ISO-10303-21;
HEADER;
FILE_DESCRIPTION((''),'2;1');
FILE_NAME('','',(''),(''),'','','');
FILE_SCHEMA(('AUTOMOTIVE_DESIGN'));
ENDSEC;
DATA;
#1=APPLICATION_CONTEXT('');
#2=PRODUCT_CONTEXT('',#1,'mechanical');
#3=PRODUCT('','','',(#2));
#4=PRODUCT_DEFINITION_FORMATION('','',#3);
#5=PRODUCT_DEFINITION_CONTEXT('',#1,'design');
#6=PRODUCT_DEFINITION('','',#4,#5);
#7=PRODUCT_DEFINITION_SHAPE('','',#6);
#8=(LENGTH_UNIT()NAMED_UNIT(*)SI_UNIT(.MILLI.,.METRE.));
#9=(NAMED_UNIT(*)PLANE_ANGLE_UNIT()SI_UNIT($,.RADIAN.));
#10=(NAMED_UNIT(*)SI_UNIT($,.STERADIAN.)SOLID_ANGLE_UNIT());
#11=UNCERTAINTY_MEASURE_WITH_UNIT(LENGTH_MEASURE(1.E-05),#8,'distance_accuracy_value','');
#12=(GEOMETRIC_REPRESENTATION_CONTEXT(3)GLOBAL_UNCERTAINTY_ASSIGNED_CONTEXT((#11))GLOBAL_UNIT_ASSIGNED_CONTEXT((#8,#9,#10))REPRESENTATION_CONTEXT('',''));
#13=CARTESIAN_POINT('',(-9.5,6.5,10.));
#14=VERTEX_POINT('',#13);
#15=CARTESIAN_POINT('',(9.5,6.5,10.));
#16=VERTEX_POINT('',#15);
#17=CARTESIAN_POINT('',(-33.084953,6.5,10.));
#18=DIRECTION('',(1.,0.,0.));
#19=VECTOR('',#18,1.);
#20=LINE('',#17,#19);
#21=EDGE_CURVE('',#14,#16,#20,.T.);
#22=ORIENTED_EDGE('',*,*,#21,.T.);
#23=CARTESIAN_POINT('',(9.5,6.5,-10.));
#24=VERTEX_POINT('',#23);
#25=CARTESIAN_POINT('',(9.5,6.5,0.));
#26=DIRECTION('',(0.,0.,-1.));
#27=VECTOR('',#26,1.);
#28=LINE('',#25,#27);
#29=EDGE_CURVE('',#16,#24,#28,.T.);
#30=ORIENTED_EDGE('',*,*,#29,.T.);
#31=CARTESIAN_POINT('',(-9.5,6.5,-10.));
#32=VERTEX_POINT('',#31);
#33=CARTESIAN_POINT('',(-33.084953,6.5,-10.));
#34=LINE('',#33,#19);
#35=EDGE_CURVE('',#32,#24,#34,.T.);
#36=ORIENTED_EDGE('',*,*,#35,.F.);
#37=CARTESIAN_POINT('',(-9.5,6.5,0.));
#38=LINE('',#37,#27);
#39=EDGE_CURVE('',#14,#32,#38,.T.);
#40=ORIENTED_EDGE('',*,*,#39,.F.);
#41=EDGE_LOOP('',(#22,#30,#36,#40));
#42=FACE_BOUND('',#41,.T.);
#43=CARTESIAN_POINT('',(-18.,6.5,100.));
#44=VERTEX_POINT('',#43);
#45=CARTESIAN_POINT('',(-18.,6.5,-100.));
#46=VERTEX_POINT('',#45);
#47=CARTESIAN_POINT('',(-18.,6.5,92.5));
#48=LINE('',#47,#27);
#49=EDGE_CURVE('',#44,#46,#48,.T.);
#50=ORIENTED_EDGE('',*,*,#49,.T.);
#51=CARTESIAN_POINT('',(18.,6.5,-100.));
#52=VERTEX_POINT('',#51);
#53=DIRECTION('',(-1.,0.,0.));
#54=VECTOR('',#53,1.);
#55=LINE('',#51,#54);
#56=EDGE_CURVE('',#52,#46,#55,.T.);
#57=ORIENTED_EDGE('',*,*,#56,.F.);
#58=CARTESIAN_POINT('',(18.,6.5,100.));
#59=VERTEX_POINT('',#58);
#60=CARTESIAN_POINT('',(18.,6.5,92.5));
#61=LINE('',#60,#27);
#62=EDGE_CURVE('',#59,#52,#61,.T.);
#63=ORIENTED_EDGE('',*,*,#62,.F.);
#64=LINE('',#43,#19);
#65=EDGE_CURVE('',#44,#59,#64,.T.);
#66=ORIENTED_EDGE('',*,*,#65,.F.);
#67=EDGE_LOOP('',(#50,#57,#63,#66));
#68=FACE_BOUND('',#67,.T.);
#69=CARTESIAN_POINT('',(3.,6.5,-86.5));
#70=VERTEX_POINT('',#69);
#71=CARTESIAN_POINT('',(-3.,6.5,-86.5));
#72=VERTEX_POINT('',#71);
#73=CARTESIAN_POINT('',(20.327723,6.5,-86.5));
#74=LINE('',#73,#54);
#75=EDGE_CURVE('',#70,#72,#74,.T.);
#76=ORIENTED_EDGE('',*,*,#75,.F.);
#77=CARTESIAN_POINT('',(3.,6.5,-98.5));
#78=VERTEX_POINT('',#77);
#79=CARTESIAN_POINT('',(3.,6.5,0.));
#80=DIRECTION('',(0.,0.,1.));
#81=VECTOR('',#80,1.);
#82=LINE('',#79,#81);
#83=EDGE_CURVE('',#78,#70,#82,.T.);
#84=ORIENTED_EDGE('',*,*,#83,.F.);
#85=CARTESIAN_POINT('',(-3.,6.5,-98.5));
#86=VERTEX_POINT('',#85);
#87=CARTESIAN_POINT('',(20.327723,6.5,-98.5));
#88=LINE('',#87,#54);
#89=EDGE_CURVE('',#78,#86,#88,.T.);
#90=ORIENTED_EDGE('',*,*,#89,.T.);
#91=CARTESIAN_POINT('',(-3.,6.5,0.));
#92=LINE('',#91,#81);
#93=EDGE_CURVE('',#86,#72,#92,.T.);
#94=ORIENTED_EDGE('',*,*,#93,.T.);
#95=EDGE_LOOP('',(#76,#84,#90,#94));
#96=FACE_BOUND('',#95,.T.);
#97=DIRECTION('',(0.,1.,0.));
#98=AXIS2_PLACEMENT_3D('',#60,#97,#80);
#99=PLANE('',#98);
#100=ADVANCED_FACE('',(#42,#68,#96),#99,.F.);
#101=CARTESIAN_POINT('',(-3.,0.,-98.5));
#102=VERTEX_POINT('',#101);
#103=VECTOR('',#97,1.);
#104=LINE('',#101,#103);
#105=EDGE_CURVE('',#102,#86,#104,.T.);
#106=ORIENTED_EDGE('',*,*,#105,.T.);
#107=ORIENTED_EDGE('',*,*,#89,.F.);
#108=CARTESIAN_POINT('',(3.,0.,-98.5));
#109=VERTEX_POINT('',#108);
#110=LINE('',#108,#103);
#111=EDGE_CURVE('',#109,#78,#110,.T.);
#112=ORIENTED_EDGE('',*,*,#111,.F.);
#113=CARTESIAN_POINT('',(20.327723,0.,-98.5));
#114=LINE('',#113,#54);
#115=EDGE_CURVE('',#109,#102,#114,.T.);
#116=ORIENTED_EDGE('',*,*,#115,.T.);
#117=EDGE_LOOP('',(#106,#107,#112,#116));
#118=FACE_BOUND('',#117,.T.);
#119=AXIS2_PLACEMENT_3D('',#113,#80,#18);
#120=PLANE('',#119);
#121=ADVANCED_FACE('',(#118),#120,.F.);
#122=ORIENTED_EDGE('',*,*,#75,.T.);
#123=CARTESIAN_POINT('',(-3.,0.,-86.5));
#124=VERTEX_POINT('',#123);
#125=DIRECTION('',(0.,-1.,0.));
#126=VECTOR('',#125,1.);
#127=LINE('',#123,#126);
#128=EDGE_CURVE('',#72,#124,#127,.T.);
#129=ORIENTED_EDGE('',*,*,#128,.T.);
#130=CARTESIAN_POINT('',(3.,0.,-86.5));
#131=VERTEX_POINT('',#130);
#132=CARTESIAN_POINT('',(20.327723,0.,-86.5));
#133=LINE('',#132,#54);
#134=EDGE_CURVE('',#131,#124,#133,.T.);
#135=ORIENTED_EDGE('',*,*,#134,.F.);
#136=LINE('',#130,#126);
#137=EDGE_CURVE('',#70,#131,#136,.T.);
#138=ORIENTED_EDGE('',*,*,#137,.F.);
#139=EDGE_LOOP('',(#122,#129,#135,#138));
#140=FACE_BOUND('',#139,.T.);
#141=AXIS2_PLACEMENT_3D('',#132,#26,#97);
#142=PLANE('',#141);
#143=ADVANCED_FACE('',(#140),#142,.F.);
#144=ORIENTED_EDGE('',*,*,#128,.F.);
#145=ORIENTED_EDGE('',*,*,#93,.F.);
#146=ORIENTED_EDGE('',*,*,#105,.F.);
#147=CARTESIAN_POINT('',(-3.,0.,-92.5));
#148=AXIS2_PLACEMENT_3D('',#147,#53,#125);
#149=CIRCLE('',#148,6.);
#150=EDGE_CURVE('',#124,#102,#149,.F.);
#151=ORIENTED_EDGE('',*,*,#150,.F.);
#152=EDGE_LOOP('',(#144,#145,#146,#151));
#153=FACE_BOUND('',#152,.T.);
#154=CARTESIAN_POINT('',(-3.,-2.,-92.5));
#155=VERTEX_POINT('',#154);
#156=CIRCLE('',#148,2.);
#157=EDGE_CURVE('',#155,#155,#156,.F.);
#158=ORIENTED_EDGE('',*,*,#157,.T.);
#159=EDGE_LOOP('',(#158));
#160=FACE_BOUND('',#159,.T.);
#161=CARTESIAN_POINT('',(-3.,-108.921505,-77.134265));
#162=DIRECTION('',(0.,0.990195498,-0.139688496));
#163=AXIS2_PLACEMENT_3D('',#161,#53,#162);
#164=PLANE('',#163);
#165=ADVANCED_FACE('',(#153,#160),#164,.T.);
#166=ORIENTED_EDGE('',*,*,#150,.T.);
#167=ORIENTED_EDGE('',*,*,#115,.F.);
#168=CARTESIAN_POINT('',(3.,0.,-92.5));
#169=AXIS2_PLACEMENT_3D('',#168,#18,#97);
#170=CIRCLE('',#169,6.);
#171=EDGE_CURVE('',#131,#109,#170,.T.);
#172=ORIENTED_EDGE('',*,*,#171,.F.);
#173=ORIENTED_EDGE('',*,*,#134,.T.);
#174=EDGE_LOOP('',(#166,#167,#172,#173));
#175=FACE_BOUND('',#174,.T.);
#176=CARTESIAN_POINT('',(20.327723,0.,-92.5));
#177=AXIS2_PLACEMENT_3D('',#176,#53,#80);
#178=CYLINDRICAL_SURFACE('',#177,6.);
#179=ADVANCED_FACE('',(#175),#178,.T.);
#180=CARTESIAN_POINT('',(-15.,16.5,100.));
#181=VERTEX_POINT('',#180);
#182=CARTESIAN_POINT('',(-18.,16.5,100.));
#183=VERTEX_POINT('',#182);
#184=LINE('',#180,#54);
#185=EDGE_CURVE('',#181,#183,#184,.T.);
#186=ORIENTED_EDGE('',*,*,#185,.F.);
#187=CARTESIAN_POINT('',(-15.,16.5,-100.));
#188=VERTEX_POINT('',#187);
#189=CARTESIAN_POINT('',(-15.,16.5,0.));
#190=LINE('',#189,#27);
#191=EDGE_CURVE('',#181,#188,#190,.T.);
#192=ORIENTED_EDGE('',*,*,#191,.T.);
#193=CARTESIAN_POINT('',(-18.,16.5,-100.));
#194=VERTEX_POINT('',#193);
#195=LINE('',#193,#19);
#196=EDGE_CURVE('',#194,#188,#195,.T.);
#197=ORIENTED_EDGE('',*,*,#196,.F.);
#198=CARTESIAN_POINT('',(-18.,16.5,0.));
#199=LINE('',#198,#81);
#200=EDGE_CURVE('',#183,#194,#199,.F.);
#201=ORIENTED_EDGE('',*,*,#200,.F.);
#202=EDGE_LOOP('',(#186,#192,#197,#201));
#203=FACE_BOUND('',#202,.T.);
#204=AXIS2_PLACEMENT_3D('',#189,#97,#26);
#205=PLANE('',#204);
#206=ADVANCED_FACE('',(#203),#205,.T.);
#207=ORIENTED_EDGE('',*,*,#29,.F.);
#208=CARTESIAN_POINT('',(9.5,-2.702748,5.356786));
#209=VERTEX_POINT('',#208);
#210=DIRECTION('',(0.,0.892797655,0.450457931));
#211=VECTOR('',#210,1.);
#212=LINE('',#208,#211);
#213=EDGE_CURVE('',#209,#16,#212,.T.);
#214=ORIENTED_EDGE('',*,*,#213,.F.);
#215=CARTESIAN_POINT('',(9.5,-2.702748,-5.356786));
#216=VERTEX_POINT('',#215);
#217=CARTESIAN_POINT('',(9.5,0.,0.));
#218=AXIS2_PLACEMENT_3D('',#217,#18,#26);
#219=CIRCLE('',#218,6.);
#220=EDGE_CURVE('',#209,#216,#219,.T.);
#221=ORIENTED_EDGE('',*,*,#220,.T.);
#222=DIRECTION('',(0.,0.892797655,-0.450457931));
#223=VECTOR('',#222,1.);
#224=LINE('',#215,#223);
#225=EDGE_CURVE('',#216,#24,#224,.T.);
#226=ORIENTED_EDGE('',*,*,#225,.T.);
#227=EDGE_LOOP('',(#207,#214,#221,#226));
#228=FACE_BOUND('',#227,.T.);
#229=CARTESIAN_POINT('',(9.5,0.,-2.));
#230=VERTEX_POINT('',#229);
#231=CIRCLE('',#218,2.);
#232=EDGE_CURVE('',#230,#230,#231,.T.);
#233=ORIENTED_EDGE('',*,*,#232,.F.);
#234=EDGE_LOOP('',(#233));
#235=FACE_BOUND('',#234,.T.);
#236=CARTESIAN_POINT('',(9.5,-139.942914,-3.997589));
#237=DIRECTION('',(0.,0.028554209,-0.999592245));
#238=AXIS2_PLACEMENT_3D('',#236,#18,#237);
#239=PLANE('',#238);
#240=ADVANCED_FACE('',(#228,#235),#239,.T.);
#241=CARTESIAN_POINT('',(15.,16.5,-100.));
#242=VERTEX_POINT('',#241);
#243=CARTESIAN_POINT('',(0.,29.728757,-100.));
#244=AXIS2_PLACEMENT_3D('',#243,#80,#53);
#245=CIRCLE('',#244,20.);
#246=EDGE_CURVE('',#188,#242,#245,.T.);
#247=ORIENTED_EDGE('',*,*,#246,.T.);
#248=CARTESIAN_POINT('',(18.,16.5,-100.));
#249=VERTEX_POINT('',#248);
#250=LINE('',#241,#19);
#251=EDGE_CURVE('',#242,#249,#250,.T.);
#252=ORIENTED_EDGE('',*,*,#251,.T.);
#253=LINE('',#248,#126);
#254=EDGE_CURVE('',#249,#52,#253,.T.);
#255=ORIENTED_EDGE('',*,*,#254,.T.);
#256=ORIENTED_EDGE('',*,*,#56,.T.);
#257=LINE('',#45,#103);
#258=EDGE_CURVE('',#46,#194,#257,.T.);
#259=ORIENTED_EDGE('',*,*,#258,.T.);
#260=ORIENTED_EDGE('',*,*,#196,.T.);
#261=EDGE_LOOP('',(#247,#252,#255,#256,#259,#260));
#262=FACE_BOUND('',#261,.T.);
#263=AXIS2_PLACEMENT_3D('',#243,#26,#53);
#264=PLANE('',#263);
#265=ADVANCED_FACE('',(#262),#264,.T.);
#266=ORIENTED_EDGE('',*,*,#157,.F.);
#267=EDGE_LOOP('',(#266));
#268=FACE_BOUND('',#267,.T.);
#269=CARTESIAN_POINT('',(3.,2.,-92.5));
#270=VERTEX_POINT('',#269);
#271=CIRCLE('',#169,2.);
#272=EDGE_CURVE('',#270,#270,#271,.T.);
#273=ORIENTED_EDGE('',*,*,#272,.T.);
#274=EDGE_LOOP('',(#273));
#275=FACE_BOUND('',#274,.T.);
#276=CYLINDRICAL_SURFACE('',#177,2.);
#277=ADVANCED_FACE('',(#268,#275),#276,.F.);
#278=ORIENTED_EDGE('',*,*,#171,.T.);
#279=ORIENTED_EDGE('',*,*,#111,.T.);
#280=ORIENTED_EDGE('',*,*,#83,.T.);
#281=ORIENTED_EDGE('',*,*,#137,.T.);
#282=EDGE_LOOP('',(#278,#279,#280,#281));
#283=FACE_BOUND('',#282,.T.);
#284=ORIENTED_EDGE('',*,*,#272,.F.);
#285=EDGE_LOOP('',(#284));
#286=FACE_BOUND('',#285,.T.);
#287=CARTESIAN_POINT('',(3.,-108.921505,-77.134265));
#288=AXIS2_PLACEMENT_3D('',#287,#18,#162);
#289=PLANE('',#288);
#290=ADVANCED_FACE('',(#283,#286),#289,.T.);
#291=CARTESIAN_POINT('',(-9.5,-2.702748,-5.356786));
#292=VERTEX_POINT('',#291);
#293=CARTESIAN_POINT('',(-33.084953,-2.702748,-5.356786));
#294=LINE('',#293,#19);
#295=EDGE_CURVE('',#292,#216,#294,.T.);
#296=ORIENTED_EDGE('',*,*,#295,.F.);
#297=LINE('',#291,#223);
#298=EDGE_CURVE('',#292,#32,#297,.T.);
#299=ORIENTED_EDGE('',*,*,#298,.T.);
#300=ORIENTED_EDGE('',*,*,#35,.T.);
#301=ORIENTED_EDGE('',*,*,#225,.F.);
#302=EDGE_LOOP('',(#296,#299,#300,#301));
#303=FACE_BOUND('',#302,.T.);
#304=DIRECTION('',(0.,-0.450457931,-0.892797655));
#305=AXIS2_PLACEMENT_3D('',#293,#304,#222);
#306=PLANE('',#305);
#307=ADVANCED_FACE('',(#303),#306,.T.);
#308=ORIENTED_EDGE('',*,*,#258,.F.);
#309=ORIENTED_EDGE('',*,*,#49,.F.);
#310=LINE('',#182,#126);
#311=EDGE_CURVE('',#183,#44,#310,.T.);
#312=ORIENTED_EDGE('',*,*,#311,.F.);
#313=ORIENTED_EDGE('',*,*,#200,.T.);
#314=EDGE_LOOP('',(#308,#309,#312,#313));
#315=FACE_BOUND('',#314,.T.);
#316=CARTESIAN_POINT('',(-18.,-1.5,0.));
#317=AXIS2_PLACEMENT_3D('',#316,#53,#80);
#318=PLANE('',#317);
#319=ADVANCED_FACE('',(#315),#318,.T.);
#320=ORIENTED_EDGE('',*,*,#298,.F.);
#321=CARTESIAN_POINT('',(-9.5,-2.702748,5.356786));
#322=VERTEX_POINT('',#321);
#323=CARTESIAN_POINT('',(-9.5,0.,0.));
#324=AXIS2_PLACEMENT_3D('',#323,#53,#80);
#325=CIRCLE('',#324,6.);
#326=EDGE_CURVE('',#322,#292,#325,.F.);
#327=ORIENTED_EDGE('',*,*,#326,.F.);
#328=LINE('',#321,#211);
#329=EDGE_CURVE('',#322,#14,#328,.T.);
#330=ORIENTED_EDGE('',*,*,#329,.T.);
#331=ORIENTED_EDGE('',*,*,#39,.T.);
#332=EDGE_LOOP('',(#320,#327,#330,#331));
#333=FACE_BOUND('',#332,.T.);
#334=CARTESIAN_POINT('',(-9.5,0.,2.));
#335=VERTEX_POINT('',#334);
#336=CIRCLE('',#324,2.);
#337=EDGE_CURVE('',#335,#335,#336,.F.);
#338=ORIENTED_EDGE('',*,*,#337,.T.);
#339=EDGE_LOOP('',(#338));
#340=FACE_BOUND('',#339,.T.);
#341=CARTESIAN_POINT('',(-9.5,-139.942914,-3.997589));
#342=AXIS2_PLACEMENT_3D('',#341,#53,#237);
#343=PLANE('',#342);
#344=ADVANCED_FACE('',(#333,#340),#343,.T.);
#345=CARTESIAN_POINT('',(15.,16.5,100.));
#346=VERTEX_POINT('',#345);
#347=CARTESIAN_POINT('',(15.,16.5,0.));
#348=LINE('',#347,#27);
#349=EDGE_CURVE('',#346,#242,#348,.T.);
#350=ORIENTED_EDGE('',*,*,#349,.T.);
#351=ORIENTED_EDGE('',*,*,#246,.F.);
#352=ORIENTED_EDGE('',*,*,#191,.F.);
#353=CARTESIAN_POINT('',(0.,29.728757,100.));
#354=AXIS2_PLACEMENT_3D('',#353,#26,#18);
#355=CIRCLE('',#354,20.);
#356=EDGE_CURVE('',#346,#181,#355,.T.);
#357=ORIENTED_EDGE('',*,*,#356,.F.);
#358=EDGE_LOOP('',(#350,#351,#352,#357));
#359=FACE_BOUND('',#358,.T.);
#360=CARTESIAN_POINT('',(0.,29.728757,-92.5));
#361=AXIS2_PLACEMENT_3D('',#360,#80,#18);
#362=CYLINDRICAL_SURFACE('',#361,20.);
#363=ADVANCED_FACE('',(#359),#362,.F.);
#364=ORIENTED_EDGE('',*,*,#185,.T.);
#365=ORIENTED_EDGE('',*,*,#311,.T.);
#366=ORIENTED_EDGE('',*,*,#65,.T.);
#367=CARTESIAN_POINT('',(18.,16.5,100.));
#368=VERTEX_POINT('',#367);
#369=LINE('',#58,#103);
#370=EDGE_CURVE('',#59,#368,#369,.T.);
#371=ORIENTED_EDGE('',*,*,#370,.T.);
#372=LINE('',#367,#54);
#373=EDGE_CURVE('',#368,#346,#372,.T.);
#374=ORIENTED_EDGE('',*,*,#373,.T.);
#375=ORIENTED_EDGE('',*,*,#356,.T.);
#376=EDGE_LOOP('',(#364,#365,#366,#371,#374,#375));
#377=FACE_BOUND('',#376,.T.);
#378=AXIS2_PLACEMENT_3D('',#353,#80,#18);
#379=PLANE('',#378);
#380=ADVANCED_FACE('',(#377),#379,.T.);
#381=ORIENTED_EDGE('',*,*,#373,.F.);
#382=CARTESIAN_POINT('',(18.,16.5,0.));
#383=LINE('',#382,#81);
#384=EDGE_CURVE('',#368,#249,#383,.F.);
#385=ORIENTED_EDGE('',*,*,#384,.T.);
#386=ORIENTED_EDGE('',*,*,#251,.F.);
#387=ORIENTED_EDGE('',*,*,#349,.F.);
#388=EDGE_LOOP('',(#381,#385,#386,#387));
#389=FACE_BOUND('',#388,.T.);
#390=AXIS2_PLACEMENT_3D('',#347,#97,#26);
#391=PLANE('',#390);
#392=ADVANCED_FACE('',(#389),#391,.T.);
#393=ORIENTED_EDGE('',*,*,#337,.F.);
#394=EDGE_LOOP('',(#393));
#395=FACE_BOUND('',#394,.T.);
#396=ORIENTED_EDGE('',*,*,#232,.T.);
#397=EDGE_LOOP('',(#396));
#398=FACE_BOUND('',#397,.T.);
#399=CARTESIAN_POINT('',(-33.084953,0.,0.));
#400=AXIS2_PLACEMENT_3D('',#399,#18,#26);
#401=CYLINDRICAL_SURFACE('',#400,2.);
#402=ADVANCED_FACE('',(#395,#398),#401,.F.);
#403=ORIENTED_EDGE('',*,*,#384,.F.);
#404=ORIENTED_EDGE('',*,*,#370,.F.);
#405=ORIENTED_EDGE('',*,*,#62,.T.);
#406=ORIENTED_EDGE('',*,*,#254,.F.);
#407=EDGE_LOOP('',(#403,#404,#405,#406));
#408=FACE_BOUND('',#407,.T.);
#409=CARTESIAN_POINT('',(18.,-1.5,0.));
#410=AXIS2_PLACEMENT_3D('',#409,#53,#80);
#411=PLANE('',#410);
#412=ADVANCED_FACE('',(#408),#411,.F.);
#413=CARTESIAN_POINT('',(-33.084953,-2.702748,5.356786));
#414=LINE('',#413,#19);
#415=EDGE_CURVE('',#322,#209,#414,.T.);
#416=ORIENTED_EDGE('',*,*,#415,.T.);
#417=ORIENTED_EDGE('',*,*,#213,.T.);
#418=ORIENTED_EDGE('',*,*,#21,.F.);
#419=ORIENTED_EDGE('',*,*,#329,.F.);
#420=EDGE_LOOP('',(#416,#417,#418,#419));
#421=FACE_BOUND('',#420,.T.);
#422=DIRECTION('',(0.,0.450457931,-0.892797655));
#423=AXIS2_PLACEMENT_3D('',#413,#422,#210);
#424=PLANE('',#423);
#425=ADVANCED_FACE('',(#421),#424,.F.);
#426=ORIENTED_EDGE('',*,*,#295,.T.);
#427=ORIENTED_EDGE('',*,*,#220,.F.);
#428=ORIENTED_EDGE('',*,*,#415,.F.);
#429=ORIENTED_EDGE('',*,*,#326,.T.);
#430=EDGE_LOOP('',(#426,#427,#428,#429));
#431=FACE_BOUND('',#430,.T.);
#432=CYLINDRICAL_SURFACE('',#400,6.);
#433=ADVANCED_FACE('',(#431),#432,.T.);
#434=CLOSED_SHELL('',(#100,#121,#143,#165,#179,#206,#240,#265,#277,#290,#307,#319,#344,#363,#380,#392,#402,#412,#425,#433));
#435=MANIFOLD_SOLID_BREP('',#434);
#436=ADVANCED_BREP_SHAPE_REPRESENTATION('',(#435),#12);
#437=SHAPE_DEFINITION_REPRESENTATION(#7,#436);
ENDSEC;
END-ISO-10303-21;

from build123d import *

# Parameters (mm, degrees)
THICKEN1_START           = -92.5
THICKEN1_OUTLINE_W       = 30
THICKEN1_OUTLINE_H       = 4.5
THICKEN1_DEPTH           = 185
THICKEN2_START           = -92.5
THICKEN2_OUTLINE_W       = 3
THICKEN2_OUTLINE_H       = 18
THICKEN2_DEPTH           = 185
THICKEN3_START           = -92.5
THICKEN3_OUTLINE_W       = 3
THICKEN3_OUTLINE_H       = 18
THICKEN3_DEPTH           = 185
BOSS_EXTRUDE1_DEPTH      = 185
SKETCH7_W                = 36
SKETCH7_H                = 8
CUT_EXTRUDE1_DEPTH       = 187.604528348
BOSS_EXTRUDE2_DEPTH      = 7.5
BOSS_EXTRUDE3_START      = 7.5
BOSS_EXTRUDE3_DEPTH      = 7.5
BOSS_EXTRUDE4_DEPTH      = 9.5
BOSS_EXTRUDE4_DEPTH_BACK = 9.5
SKETCH10_R               = 6
SKETCH10_R_2             = 2
BOSS_EXTRUDE5_DEPTH      = 3
BOSS_EXTRUDE5_DEPTH_BACK = 3
SKETCH11_R               = 6
SKETCH11_R_2             = 2


# Read off the part's stored shape, not the designer's step: Thicken1, Thicken2, Thicken3
with BuildPart() as part:
    # Thicken1 outline → Thicken1 (new body)
    with BuildSketch(Plane.XY.offset(THICKEN1_START)):
        with Locations((0, 0.75)):
            Rectangle(THICKEN1_OUTLINE_W, THICKEN1_OUTLINE_H)
    extrude(amount=THICKEN1_DEPTH)

    # Thicken2 outline → Thicken2 (add)
    with BuildSketch(Plane.XY.offset(THICKEN2_START)):
        with Locations((16.5, 7.5)):
            Rectangle(THICKEN2_OUTLINE_W, THICKEN2_OUTLINE_H)
    extrude(amount=THICKEN2_DEPTH)

    # Thicken3 outline → Thicken3 (add)
    with BuildSketch(Plane.XY.offset(THICKEN3_START)):
        with Locations((-16.5, 7.5)):
            Rectangle(THICKEN3_OUTLINE_W, THICKEN3_OUTLINE_H)
    extrude(amount=THICKEN3_DEPTH)

    # Sketch4 → Boss-Extrude1 (add)
    with BuildSketch(Plane.XY.offset(92.5)):
        with BuildLine():
            Line((-15, 16.5), (-15, 3))
            Line((-15, 3), (15, 3))
            Line((15, 3), (15, 16.5))
            ThreePointArc((15, 16.5), (0, 9.728756555), (-15, 16.5))
        make_face()
    extrude(amount=-BOSS_EXTRUDE1_DEPTH)

    # Sketch7 → Cut-Extrude1 (cut, through all)
    with BuildSketch(Plane(origin=(0, 0, -92.5), x_dir=(-1, 0, 0), z_dir=(0, 0, -1))):
        with Locations((0, 2.5)):
            Rectangle(SKETCH7_W, SKETCH7_H)
    extrude(amount=-CUT_EXTRUDE1_DEPTH, mode=Mode.SUBTRACT)

    # Sketch8 → Boss-Extrude2 (add)
    with BuildSketch(Plane(origin=(0, 0, -92.5), x_dir=(-1, 0, 0), z_dir=(0, 0, -1))):
        with BuildLine():
            Line((-18, 6.5), (18, 6.5))
            Line((18, 6.5), (18, 16.5))
            Line((18, 16.5), (15, 16.5))
            ThreePointArc((15, 16.5), (0, 9.728756555), (-15, 16.5))
            Line((-15, 16.5), (-18, 16.5))
            Line((-18, 16.5), (-18, 6.5))
        make_face()
    extrude(amount=BOSS_EXTRUDE2_DEPTH)

    # Sketch9 → Boss-Extrude3 (add)
    with BuildSketch(Plane.XY.offset(92.5).offset(BOSS_EXTRUDE3_START)):
        with BuildLine():
            Line((-18, 6.5), (18, 6.5))
            Line((18, 6.5), (18, 16.5))
            Line((18, 16.5), (15, 16.5))
            ThreePointArc((15, 16.5), (0, 9.728756555), (-15, 16.5))
            Line((-15, 16.5), (-18, 16.5))
            Line((-18, 16.5), (-18, 6.5))
        make_face()
    extrude(amount=-BOSS_EXTRUDE3_DEPTH)

    # Sketch10 → Boss-Extrude4 (add, two sides: drawn at the far end of the back side and taken through both)
    # profile 1 of 2: a face of its own
    with BuildSketch(Plane(origin=(0, 0, 0), x_dir=(0, 0, -1), z_dir=(1, 0, 0)).offset(-BOSS_EXTRUDE4_DEPTH_BACK)):
        Circle(SKETCH10_R)
        Circle(SKETCH10_R_2, mode=Mode.SUBTRACT)
    # profile 2 of 2: a face of its own
    with BuildSketch(Plane(origin=(0, 0, 0), x_dir=(0, 0, -1), z_dir=(1, 0, 0)).offset(-BOSS_EXTRUDE4_DEPTH_BACK)):
        with BuildLine():
            Line((10, 6.5), (-10, 6.5))
            Line((-10, 6.5), (-5.35678593, -2.702747584))
            ThreePointArc((-5.35678593, -2.702747584), (-1.389115622, 5.836981908), (6, 0))
            ThreePointArc((6, 0), (5.836981908, -1.389115622), (5.35678593, -2.702747584))
            Line((5.35678593, -2.702747584), (10, 6.5))
        make_face()
    extrude(amount=BOSS_EXTRUDE4_DEPTH + BOSS_EXTRUDE4_DEPTH_BACK)

    # Sketch11 → Boss-Extrude5 (add, two sides: drawn at the far end of the back side and taken through both)
    # profile 1 of 2: a face of its own
    with BuildSketch(Plane(origin=(0, 0, 0), x_dir=(0, 0, -1), z_dir=(1, 0, 0)).offset(-BOSS_EXTRUDE5_DEPTH_BACK)):
        with Locations((92.5, 0)):
            Circle(SKETCH11_R)
        with Locations(Location((92.5, 0, 0), (0, 0, 90))):
            Circle(SKETCH11_R_2, mode=Mode.SUBTRACT)
    # profile 2 of 2: a face of its own
    with BuildSketch(Plane(origin=(0, 0, 0), x_dir=(0, 0, -1), z_dir=(1, 0, 0)).offset(-BOSS_EXTRUDE5_DEPTH_BACK)):
        with BuildLine():
            ThreePointArc((86.5, 0), (92.5, 6), (98.5, 0))
            Line((98.5, 0), (98.5, 6.5))
            Line((98.5, 6.5), (86.5, 6.5))
            Line((86.5, 6.5), (86.5, 0))
        make_face()
    extrude(amount=BOSS_EXTRUDE5_DEPTH + BOSS_EXTRUDE5_DEPTH_BACK)


solid = part.part
